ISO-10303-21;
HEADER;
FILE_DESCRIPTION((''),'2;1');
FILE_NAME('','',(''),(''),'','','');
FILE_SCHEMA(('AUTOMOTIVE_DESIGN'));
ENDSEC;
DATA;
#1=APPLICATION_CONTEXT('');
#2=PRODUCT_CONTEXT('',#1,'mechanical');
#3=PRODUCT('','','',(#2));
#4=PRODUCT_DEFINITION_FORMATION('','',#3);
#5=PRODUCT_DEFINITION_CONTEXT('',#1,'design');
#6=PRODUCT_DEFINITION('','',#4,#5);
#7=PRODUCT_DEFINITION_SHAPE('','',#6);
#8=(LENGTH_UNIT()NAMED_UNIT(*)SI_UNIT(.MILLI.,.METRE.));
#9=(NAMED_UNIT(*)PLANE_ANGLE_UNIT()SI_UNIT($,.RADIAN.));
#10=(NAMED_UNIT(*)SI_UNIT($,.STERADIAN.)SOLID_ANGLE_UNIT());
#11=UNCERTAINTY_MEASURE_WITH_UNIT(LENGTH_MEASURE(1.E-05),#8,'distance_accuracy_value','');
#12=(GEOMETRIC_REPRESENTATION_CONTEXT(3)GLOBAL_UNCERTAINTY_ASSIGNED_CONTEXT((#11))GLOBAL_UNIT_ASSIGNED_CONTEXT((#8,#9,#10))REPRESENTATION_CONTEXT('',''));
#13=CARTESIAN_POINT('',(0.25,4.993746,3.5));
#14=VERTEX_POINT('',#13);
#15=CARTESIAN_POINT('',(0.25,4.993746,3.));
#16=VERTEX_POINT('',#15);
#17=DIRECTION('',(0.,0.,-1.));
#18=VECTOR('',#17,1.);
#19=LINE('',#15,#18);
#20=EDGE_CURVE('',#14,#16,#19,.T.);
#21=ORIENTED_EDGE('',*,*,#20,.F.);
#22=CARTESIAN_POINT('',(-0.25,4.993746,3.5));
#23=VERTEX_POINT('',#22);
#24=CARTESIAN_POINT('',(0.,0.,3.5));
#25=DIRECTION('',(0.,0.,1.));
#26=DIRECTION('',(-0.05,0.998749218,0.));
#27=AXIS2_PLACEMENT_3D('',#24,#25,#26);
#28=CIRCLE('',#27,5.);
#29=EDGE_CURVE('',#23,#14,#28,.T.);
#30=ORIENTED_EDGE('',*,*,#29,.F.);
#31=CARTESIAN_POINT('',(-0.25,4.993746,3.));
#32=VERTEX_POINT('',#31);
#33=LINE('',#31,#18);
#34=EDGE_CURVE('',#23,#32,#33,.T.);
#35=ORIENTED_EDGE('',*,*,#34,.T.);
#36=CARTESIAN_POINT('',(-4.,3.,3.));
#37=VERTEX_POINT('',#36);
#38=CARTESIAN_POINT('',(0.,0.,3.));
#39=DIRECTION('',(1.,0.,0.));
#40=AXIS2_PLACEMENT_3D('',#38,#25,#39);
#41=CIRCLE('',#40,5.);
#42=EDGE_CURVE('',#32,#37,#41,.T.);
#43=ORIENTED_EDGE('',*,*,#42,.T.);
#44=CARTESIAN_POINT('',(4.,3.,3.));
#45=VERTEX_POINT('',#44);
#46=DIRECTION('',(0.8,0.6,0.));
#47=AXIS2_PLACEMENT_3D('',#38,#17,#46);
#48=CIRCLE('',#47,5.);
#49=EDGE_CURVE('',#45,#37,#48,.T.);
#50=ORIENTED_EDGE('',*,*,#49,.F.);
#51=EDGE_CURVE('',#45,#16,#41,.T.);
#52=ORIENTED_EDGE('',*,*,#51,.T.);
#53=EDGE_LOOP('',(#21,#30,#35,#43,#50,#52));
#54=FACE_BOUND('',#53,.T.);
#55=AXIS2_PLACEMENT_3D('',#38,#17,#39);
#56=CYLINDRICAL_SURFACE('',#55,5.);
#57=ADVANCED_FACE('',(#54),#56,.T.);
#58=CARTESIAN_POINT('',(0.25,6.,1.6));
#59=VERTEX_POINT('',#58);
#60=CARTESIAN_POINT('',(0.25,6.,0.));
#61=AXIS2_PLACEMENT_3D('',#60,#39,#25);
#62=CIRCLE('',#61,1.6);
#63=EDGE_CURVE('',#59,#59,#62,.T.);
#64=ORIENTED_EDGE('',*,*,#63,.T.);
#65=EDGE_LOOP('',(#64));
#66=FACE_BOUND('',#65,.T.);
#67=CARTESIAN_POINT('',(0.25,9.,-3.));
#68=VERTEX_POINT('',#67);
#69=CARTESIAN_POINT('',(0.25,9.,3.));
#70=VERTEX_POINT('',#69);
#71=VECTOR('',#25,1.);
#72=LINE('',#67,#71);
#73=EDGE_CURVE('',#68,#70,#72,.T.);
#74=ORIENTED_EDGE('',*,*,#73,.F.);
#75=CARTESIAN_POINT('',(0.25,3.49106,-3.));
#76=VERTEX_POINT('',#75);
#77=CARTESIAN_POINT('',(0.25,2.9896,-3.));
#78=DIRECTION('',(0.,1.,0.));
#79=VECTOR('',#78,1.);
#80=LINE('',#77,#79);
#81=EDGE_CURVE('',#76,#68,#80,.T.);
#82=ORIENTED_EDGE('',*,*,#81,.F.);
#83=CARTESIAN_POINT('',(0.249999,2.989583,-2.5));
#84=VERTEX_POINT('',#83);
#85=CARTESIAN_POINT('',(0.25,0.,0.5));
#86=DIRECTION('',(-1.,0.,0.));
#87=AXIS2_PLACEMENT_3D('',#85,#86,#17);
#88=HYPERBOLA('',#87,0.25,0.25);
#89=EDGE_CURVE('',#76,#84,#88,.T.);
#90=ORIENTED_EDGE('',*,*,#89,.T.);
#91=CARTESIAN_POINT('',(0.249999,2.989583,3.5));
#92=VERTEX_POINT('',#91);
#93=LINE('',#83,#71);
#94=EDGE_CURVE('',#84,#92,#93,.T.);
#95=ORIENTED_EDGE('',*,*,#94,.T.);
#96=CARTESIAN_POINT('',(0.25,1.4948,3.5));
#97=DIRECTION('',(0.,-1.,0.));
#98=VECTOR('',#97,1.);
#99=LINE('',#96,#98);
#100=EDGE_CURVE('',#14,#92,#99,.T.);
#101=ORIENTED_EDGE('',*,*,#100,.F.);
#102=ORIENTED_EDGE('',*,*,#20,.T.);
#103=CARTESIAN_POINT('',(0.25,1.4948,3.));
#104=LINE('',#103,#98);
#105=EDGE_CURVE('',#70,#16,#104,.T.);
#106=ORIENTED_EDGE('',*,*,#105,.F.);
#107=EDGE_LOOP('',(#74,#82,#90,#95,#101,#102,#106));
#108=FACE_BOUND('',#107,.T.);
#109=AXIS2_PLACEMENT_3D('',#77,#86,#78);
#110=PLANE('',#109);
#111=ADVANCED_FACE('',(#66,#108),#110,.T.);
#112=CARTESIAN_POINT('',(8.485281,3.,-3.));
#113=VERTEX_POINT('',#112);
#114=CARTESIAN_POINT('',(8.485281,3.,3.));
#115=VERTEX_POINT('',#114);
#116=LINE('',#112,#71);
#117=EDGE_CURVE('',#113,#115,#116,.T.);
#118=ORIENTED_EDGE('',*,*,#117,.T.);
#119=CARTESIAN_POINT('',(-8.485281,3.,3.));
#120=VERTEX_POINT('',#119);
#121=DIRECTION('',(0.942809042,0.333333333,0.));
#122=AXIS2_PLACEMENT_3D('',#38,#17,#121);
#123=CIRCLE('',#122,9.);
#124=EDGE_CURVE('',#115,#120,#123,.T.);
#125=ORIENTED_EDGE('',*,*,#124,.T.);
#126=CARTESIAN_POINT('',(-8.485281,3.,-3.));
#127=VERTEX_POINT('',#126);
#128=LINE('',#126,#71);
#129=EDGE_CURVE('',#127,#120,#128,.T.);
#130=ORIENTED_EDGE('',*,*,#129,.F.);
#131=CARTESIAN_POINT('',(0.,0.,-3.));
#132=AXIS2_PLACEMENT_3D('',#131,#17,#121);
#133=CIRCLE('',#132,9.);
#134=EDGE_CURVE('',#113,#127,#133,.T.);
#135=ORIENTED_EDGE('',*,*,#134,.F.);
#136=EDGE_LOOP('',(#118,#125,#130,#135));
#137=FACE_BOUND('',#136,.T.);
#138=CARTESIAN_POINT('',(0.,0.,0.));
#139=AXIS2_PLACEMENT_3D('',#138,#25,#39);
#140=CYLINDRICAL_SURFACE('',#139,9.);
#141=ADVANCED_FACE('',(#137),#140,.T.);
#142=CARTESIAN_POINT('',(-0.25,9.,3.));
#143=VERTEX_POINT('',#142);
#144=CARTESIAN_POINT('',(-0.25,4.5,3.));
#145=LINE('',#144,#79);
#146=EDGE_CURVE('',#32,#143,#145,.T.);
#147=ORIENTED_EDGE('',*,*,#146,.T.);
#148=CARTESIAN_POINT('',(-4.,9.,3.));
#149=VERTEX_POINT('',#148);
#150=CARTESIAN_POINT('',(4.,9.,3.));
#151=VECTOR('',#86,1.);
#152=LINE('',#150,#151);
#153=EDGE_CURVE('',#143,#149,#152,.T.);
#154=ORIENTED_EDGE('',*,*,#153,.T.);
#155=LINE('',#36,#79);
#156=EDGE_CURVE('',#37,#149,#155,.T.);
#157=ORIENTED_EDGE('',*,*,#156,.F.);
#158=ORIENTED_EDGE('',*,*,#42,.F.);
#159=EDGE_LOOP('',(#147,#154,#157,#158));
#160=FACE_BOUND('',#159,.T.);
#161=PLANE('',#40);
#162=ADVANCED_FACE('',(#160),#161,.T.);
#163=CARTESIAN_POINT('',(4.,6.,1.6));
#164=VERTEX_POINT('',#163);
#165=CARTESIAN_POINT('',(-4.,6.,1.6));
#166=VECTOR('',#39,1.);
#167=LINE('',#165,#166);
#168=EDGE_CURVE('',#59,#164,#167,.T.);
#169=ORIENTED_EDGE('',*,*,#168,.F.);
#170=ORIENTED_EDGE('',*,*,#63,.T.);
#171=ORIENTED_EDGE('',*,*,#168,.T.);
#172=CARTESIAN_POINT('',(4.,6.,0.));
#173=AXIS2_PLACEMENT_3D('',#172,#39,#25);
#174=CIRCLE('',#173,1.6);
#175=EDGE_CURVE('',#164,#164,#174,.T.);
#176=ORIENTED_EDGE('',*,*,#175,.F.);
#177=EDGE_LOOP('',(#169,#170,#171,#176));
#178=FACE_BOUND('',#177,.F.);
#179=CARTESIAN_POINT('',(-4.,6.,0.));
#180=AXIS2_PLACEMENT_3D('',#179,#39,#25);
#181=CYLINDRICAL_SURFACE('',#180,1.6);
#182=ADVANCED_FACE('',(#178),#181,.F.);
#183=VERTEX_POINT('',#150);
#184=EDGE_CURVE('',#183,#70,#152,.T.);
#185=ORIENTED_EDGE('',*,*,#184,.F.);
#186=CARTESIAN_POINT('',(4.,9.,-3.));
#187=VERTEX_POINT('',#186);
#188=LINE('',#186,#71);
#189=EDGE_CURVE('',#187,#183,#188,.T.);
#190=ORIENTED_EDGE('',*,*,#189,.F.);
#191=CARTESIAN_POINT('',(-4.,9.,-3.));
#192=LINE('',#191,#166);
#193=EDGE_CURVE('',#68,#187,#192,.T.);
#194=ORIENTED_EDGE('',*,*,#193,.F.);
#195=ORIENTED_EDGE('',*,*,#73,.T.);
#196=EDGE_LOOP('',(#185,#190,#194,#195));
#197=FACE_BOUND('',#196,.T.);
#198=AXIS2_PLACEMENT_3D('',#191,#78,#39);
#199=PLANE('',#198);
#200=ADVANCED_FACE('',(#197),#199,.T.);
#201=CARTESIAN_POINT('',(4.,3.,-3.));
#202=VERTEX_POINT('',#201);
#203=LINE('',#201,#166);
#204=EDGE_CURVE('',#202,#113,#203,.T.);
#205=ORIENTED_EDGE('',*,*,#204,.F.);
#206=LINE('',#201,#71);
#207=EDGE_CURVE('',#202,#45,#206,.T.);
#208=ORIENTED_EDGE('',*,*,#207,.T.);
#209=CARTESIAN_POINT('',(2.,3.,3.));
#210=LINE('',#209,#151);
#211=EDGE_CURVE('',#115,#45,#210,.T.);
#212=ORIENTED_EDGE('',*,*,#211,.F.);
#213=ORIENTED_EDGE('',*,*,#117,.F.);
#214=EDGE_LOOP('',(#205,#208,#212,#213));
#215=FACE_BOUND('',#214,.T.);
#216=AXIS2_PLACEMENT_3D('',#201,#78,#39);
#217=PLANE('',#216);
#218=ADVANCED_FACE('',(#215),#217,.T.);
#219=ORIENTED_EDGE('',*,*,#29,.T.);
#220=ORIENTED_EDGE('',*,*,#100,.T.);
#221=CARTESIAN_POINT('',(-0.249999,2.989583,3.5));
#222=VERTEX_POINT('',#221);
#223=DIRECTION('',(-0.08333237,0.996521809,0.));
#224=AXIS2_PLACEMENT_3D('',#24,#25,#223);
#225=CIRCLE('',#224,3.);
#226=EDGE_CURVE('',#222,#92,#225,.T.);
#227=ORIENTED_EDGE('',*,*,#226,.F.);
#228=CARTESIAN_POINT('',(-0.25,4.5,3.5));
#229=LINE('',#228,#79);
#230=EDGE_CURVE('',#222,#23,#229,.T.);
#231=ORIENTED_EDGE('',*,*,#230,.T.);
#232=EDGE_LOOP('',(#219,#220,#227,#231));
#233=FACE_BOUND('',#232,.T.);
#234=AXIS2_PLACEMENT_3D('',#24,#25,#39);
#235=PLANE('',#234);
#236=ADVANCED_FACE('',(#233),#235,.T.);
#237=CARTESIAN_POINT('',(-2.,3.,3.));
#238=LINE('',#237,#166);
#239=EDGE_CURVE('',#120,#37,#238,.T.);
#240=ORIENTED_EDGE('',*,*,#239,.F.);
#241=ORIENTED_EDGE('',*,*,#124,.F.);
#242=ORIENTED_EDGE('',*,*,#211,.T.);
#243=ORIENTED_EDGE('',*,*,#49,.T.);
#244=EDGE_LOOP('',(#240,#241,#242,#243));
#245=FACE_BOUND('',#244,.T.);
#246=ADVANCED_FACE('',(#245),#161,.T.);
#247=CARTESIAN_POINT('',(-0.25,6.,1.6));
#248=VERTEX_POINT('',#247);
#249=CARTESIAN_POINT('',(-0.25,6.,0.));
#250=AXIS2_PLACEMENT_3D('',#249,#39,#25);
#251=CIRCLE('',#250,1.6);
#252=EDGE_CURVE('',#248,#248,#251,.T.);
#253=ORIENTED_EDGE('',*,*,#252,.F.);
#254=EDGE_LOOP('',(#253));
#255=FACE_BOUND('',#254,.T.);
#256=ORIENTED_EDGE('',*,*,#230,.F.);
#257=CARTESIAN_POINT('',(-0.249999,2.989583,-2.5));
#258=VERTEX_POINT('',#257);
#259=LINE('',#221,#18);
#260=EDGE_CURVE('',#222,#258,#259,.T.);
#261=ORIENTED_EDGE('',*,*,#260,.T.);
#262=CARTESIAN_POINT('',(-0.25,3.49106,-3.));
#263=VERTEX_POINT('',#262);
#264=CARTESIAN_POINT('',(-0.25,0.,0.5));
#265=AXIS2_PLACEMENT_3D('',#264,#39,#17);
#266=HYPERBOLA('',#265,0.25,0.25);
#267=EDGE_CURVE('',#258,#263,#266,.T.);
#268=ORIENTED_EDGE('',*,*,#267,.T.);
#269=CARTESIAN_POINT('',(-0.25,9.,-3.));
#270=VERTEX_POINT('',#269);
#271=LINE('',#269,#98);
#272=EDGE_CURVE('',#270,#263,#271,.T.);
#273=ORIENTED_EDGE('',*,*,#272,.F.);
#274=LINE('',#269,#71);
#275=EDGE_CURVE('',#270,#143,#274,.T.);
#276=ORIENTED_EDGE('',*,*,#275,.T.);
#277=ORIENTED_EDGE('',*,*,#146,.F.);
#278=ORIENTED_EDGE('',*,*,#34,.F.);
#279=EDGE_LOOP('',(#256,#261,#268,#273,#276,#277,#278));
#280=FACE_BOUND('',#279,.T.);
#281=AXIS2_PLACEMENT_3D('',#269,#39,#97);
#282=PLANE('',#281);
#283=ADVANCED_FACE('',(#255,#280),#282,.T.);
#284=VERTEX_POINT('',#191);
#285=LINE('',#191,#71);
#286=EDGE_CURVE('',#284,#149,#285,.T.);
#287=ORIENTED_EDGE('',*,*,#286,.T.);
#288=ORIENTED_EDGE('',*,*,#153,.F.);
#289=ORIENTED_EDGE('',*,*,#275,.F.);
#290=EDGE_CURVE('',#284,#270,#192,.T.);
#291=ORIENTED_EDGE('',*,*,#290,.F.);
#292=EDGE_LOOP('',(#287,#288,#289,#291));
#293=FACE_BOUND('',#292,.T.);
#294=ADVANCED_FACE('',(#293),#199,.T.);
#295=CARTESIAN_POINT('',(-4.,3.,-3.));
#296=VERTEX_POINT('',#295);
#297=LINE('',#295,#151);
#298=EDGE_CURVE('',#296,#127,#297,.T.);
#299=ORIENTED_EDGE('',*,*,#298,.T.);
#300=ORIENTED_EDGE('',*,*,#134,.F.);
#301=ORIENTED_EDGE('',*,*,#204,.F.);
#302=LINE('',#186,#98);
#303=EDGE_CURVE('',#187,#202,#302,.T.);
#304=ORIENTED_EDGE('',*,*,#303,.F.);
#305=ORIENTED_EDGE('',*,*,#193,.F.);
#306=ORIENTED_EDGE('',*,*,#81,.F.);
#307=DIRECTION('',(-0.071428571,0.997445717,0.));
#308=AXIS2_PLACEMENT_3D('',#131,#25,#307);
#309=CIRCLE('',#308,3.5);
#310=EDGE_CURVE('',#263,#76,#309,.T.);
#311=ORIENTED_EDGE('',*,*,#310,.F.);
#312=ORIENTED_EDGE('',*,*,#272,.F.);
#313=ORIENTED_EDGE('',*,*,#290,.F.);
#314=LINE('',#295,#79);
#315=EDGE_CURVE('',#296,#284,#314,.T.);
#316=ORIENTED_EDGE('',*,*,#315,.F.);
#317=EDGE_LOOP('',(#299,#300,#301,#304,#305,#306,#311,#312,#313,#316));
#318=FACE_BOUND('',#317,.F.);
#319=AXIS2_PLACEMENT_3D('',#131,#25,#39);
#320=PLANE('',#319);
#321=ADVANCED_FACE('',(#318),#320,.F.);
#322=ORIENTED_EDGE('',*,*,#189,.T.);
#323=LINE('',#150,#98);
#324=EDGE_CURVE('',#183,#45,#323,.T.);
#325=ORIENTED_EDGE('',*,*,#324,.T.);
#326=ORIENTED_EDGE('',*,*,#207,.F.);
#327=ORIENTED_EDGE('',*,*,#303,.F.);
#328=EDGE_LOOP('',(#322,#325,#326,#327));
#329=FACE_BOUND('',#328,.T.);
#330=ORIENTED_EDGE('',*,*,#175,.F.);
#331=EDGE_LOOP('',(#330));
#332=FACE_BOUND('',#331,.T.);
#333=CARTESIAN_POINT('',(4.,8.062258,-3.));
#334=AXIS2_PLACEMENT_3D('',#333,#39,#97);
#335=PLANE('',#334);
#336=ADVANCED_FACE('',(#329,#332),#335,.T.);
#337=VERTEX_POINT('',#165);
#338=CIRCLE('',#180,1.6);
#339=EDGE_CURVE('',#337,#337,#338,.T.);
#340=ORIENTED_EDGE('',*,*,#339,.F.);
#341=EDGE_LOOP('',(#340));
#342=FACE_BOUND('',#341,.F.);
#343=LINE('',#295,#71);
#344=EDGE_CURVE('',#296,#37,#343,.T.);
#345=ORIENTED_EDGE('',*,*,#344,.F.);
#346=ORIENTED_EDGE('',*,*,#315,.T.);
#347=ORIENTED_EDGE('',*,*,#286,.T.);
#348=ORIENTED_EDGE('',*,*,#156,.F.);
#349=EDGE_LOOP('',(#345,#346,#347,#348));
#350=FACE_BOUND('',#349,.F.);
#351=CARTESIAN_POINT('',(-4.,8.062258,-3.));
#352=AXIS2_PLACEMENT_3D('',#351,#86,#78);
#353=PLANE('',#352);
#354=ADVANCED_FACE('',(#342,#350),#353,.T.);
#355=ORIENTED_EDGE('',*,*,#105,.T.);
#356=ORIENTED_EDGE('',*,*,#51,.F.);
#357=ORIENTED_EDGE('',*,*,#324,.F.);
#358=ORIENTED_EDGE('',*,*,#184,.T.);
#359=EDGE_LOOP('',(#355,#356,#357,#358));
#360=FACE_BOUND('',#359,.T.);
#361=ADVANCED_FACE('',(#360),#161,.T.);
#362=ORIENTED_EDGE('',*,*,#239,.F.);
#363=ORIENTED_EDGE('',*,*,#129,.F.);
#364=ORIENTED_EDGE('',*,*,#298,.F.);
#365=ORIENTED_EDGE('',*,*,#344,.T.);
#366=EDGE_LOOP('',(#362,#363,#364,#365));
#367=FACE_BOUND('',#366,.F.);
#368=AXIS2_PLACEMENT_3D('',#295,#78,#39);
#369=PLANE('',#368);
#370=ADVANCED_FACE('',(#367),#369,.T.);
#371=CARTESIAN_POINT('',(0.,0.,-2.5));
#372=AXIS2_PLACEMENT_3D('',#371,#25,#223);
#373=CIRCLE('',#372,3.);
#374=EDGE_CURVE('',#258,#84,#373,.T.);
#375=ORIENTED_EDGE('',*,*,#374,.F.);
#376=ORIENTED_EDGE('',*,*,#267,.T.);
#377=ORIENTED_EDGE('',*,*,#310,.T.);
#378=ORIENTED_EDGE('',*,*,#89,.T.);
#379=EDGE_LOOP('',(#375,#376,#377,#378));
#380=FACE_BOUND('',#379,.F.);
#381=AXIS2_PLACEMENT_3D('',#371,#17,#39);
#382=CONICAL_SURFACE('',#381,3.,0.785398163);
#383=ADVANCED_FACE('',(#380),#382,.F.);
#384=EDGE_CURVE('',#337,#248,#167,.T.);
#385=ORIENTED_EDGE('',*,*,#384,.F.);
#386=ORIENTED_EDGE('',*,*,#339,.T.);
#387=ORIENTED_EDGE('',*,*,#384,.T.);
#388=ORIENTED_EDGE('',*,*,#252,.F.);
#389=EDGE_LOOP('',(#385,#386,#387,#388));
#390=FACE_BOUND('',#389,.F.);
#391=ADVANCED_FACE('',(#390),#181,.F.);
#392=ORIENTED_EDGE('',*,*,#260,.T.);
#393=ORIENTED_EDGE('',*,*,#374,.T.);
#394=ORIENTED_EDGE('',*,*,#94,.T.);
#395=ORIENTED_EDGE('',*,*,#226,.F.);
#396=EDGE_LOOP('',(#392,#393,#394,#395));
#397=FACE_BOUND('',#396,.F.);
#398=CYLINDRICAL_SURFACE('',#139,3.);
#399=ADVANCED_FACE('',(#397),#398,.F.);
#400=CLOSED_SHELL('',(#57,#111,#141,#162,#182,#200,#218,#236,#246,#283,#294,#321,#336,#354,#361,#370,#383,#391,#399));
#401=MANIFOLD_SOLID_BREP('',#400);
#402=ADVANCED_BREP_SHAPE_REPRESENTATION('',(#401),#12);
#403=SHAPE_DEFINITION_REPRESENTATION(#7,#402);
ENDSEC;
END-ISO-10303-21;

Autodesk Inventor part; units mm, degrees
ref_plane "XZ Plane" through (0, 0, 0) normal (0, 1, 0) x (-1, 0, 0)
ref_plane "XY Plane" through (0, 0, 0) normal (0, 0, 1) x (1, 0, 0)
sketch "スケッチ1" plane through (0, 0, 0) normal (0, 0, 1) x (1, 0, 0)
  circle A0 centre (0, 0) radius 3
  circle A1 centre (0, 0) radius 9
  dimension "d0" = 6
  dimension "d1" = 18
extrude "押し出し1" add sketch "スケッチ1" along normal mid plane 6
ref_plane "作業平面1" through (-9, 0, 0) normal (1, 0, 0) x (0, 1, 0)
sketch "スケッチ5" plane through (0, 0, 3) normal (0, 0, 1) x (1, 0, 0)
  arc A0 (3, 0) -> (3, 0) centre (0, 0) ccw projected
  circle A1 centre (0, 0) radius 5
  circle A2 centre (0, 0) radius 3 projected
  circle A3 centre (0, 0) radius 3 projected
  dimension "d33" = 10
extrude "押し出し3" add sketch "スケッチ5" along normal blind 0.5
chamfer "面取り3" distance 0.5 angle 45 1 edges at (-3, 0, -3)
sketch "スケッチ10" plane through (0, 0, -3) normal (0, 0, -1) x (-1, 0, 0)
  circle A0 centre (0, 0) radius 9 projected
  line L0 (-9, 9) -> (-4, 9)
  line L1 (-4, 9) -> (-4, 3)
  line L2 (-4, 3) -> (-9, 3)
  line L3 (-9, 3) -> (-9, 9)
  point P0 (-8.4853, 3)
  point P1 (-4, 8.0623)
  dimension "d48" = 4
  dimension "d49" = 6
extrude "押し出し7" cut sketch "スケッチ10" against normal blind 10 contours L1 L2 A0 picked at (-4.4898, 6.0699)
mirror "ミラー4" about plane through (0, 0, 0) normal (1, 0, 0) of "押し出し7"
sketch "スケッチ11" plane through (-4, 3, 3) normal (-1, 0, 0) x (0, 0, 1)
  line L0 (-7.3, -3) -> (1.8, -3) projected
  line L1 (-6, 0) -> (-6, 5.0623) projected
  point P0 (-3, -3)
  point P1 (-3, 3)
  dimension "d52" = 6
  dimension "d53" = 3
hole "穴3" at (-4, 6, 0) direction (1, 0, 0) diameter 3.2 end through all clearance for "Socket Head Cap Screw" size "M3" standard "Ansi Metric M Profile"
sketch "スケッチ12" plane through (0, 0, -3) normal (0, 0, -1) x (-1, 0, 0)
  line L0 (-4, 8.0623) -> (4, 8.0623)
  line L1 (4, 8.0623) -> (4, 9)
  line L2 (4, 9) -> (-4, 9)
  line L3 (-4, 9) -> (-4, 8.0623)
  arc A0 (4, 8.0623) -> (-4, 8.0623) centre (0, 0) ccw projected
  point P0 (0, 9)
extrude "押し出し8" add sketch "スケッチ12" against normal up to surface (6 mm away) contours L3 L2 A0 | A0 L2 L1
sketch "スケッチ13" plane through (0, 0, -3) normal (0, 0, -1) x (-1, 0, 0)
  line L0 (-0.25, 9) -> (0.25, 9)
  line L1 (0.25, 9) -> (0.25, 2.9896)
  line L2 (0.25, 2.9896) -> (-0.25, 2.9896)
  line L3 (-0.25, 2.9896) -> (-0.25, 9)
  line L4 (-0.25, 9) -> (0.25, 2.9896) construction
  line L5 (0.25, 9) -> (-0.25, 2.9896) construction
  line L6 (4, 9) -> (-4, 9) projected
  circle A0 centre (0, 0) radius 3 projected
  point P0 (0, 5.9948)
  point P1 (0, 5.9948)
  dimension "d63" = 0.5
extrude "押し出し9" cut sketch "スケッチ13" against normal blind 10 contours L0 L1 A0 L3
properties part number "shooter_base7" material "ABS プラスチック"
